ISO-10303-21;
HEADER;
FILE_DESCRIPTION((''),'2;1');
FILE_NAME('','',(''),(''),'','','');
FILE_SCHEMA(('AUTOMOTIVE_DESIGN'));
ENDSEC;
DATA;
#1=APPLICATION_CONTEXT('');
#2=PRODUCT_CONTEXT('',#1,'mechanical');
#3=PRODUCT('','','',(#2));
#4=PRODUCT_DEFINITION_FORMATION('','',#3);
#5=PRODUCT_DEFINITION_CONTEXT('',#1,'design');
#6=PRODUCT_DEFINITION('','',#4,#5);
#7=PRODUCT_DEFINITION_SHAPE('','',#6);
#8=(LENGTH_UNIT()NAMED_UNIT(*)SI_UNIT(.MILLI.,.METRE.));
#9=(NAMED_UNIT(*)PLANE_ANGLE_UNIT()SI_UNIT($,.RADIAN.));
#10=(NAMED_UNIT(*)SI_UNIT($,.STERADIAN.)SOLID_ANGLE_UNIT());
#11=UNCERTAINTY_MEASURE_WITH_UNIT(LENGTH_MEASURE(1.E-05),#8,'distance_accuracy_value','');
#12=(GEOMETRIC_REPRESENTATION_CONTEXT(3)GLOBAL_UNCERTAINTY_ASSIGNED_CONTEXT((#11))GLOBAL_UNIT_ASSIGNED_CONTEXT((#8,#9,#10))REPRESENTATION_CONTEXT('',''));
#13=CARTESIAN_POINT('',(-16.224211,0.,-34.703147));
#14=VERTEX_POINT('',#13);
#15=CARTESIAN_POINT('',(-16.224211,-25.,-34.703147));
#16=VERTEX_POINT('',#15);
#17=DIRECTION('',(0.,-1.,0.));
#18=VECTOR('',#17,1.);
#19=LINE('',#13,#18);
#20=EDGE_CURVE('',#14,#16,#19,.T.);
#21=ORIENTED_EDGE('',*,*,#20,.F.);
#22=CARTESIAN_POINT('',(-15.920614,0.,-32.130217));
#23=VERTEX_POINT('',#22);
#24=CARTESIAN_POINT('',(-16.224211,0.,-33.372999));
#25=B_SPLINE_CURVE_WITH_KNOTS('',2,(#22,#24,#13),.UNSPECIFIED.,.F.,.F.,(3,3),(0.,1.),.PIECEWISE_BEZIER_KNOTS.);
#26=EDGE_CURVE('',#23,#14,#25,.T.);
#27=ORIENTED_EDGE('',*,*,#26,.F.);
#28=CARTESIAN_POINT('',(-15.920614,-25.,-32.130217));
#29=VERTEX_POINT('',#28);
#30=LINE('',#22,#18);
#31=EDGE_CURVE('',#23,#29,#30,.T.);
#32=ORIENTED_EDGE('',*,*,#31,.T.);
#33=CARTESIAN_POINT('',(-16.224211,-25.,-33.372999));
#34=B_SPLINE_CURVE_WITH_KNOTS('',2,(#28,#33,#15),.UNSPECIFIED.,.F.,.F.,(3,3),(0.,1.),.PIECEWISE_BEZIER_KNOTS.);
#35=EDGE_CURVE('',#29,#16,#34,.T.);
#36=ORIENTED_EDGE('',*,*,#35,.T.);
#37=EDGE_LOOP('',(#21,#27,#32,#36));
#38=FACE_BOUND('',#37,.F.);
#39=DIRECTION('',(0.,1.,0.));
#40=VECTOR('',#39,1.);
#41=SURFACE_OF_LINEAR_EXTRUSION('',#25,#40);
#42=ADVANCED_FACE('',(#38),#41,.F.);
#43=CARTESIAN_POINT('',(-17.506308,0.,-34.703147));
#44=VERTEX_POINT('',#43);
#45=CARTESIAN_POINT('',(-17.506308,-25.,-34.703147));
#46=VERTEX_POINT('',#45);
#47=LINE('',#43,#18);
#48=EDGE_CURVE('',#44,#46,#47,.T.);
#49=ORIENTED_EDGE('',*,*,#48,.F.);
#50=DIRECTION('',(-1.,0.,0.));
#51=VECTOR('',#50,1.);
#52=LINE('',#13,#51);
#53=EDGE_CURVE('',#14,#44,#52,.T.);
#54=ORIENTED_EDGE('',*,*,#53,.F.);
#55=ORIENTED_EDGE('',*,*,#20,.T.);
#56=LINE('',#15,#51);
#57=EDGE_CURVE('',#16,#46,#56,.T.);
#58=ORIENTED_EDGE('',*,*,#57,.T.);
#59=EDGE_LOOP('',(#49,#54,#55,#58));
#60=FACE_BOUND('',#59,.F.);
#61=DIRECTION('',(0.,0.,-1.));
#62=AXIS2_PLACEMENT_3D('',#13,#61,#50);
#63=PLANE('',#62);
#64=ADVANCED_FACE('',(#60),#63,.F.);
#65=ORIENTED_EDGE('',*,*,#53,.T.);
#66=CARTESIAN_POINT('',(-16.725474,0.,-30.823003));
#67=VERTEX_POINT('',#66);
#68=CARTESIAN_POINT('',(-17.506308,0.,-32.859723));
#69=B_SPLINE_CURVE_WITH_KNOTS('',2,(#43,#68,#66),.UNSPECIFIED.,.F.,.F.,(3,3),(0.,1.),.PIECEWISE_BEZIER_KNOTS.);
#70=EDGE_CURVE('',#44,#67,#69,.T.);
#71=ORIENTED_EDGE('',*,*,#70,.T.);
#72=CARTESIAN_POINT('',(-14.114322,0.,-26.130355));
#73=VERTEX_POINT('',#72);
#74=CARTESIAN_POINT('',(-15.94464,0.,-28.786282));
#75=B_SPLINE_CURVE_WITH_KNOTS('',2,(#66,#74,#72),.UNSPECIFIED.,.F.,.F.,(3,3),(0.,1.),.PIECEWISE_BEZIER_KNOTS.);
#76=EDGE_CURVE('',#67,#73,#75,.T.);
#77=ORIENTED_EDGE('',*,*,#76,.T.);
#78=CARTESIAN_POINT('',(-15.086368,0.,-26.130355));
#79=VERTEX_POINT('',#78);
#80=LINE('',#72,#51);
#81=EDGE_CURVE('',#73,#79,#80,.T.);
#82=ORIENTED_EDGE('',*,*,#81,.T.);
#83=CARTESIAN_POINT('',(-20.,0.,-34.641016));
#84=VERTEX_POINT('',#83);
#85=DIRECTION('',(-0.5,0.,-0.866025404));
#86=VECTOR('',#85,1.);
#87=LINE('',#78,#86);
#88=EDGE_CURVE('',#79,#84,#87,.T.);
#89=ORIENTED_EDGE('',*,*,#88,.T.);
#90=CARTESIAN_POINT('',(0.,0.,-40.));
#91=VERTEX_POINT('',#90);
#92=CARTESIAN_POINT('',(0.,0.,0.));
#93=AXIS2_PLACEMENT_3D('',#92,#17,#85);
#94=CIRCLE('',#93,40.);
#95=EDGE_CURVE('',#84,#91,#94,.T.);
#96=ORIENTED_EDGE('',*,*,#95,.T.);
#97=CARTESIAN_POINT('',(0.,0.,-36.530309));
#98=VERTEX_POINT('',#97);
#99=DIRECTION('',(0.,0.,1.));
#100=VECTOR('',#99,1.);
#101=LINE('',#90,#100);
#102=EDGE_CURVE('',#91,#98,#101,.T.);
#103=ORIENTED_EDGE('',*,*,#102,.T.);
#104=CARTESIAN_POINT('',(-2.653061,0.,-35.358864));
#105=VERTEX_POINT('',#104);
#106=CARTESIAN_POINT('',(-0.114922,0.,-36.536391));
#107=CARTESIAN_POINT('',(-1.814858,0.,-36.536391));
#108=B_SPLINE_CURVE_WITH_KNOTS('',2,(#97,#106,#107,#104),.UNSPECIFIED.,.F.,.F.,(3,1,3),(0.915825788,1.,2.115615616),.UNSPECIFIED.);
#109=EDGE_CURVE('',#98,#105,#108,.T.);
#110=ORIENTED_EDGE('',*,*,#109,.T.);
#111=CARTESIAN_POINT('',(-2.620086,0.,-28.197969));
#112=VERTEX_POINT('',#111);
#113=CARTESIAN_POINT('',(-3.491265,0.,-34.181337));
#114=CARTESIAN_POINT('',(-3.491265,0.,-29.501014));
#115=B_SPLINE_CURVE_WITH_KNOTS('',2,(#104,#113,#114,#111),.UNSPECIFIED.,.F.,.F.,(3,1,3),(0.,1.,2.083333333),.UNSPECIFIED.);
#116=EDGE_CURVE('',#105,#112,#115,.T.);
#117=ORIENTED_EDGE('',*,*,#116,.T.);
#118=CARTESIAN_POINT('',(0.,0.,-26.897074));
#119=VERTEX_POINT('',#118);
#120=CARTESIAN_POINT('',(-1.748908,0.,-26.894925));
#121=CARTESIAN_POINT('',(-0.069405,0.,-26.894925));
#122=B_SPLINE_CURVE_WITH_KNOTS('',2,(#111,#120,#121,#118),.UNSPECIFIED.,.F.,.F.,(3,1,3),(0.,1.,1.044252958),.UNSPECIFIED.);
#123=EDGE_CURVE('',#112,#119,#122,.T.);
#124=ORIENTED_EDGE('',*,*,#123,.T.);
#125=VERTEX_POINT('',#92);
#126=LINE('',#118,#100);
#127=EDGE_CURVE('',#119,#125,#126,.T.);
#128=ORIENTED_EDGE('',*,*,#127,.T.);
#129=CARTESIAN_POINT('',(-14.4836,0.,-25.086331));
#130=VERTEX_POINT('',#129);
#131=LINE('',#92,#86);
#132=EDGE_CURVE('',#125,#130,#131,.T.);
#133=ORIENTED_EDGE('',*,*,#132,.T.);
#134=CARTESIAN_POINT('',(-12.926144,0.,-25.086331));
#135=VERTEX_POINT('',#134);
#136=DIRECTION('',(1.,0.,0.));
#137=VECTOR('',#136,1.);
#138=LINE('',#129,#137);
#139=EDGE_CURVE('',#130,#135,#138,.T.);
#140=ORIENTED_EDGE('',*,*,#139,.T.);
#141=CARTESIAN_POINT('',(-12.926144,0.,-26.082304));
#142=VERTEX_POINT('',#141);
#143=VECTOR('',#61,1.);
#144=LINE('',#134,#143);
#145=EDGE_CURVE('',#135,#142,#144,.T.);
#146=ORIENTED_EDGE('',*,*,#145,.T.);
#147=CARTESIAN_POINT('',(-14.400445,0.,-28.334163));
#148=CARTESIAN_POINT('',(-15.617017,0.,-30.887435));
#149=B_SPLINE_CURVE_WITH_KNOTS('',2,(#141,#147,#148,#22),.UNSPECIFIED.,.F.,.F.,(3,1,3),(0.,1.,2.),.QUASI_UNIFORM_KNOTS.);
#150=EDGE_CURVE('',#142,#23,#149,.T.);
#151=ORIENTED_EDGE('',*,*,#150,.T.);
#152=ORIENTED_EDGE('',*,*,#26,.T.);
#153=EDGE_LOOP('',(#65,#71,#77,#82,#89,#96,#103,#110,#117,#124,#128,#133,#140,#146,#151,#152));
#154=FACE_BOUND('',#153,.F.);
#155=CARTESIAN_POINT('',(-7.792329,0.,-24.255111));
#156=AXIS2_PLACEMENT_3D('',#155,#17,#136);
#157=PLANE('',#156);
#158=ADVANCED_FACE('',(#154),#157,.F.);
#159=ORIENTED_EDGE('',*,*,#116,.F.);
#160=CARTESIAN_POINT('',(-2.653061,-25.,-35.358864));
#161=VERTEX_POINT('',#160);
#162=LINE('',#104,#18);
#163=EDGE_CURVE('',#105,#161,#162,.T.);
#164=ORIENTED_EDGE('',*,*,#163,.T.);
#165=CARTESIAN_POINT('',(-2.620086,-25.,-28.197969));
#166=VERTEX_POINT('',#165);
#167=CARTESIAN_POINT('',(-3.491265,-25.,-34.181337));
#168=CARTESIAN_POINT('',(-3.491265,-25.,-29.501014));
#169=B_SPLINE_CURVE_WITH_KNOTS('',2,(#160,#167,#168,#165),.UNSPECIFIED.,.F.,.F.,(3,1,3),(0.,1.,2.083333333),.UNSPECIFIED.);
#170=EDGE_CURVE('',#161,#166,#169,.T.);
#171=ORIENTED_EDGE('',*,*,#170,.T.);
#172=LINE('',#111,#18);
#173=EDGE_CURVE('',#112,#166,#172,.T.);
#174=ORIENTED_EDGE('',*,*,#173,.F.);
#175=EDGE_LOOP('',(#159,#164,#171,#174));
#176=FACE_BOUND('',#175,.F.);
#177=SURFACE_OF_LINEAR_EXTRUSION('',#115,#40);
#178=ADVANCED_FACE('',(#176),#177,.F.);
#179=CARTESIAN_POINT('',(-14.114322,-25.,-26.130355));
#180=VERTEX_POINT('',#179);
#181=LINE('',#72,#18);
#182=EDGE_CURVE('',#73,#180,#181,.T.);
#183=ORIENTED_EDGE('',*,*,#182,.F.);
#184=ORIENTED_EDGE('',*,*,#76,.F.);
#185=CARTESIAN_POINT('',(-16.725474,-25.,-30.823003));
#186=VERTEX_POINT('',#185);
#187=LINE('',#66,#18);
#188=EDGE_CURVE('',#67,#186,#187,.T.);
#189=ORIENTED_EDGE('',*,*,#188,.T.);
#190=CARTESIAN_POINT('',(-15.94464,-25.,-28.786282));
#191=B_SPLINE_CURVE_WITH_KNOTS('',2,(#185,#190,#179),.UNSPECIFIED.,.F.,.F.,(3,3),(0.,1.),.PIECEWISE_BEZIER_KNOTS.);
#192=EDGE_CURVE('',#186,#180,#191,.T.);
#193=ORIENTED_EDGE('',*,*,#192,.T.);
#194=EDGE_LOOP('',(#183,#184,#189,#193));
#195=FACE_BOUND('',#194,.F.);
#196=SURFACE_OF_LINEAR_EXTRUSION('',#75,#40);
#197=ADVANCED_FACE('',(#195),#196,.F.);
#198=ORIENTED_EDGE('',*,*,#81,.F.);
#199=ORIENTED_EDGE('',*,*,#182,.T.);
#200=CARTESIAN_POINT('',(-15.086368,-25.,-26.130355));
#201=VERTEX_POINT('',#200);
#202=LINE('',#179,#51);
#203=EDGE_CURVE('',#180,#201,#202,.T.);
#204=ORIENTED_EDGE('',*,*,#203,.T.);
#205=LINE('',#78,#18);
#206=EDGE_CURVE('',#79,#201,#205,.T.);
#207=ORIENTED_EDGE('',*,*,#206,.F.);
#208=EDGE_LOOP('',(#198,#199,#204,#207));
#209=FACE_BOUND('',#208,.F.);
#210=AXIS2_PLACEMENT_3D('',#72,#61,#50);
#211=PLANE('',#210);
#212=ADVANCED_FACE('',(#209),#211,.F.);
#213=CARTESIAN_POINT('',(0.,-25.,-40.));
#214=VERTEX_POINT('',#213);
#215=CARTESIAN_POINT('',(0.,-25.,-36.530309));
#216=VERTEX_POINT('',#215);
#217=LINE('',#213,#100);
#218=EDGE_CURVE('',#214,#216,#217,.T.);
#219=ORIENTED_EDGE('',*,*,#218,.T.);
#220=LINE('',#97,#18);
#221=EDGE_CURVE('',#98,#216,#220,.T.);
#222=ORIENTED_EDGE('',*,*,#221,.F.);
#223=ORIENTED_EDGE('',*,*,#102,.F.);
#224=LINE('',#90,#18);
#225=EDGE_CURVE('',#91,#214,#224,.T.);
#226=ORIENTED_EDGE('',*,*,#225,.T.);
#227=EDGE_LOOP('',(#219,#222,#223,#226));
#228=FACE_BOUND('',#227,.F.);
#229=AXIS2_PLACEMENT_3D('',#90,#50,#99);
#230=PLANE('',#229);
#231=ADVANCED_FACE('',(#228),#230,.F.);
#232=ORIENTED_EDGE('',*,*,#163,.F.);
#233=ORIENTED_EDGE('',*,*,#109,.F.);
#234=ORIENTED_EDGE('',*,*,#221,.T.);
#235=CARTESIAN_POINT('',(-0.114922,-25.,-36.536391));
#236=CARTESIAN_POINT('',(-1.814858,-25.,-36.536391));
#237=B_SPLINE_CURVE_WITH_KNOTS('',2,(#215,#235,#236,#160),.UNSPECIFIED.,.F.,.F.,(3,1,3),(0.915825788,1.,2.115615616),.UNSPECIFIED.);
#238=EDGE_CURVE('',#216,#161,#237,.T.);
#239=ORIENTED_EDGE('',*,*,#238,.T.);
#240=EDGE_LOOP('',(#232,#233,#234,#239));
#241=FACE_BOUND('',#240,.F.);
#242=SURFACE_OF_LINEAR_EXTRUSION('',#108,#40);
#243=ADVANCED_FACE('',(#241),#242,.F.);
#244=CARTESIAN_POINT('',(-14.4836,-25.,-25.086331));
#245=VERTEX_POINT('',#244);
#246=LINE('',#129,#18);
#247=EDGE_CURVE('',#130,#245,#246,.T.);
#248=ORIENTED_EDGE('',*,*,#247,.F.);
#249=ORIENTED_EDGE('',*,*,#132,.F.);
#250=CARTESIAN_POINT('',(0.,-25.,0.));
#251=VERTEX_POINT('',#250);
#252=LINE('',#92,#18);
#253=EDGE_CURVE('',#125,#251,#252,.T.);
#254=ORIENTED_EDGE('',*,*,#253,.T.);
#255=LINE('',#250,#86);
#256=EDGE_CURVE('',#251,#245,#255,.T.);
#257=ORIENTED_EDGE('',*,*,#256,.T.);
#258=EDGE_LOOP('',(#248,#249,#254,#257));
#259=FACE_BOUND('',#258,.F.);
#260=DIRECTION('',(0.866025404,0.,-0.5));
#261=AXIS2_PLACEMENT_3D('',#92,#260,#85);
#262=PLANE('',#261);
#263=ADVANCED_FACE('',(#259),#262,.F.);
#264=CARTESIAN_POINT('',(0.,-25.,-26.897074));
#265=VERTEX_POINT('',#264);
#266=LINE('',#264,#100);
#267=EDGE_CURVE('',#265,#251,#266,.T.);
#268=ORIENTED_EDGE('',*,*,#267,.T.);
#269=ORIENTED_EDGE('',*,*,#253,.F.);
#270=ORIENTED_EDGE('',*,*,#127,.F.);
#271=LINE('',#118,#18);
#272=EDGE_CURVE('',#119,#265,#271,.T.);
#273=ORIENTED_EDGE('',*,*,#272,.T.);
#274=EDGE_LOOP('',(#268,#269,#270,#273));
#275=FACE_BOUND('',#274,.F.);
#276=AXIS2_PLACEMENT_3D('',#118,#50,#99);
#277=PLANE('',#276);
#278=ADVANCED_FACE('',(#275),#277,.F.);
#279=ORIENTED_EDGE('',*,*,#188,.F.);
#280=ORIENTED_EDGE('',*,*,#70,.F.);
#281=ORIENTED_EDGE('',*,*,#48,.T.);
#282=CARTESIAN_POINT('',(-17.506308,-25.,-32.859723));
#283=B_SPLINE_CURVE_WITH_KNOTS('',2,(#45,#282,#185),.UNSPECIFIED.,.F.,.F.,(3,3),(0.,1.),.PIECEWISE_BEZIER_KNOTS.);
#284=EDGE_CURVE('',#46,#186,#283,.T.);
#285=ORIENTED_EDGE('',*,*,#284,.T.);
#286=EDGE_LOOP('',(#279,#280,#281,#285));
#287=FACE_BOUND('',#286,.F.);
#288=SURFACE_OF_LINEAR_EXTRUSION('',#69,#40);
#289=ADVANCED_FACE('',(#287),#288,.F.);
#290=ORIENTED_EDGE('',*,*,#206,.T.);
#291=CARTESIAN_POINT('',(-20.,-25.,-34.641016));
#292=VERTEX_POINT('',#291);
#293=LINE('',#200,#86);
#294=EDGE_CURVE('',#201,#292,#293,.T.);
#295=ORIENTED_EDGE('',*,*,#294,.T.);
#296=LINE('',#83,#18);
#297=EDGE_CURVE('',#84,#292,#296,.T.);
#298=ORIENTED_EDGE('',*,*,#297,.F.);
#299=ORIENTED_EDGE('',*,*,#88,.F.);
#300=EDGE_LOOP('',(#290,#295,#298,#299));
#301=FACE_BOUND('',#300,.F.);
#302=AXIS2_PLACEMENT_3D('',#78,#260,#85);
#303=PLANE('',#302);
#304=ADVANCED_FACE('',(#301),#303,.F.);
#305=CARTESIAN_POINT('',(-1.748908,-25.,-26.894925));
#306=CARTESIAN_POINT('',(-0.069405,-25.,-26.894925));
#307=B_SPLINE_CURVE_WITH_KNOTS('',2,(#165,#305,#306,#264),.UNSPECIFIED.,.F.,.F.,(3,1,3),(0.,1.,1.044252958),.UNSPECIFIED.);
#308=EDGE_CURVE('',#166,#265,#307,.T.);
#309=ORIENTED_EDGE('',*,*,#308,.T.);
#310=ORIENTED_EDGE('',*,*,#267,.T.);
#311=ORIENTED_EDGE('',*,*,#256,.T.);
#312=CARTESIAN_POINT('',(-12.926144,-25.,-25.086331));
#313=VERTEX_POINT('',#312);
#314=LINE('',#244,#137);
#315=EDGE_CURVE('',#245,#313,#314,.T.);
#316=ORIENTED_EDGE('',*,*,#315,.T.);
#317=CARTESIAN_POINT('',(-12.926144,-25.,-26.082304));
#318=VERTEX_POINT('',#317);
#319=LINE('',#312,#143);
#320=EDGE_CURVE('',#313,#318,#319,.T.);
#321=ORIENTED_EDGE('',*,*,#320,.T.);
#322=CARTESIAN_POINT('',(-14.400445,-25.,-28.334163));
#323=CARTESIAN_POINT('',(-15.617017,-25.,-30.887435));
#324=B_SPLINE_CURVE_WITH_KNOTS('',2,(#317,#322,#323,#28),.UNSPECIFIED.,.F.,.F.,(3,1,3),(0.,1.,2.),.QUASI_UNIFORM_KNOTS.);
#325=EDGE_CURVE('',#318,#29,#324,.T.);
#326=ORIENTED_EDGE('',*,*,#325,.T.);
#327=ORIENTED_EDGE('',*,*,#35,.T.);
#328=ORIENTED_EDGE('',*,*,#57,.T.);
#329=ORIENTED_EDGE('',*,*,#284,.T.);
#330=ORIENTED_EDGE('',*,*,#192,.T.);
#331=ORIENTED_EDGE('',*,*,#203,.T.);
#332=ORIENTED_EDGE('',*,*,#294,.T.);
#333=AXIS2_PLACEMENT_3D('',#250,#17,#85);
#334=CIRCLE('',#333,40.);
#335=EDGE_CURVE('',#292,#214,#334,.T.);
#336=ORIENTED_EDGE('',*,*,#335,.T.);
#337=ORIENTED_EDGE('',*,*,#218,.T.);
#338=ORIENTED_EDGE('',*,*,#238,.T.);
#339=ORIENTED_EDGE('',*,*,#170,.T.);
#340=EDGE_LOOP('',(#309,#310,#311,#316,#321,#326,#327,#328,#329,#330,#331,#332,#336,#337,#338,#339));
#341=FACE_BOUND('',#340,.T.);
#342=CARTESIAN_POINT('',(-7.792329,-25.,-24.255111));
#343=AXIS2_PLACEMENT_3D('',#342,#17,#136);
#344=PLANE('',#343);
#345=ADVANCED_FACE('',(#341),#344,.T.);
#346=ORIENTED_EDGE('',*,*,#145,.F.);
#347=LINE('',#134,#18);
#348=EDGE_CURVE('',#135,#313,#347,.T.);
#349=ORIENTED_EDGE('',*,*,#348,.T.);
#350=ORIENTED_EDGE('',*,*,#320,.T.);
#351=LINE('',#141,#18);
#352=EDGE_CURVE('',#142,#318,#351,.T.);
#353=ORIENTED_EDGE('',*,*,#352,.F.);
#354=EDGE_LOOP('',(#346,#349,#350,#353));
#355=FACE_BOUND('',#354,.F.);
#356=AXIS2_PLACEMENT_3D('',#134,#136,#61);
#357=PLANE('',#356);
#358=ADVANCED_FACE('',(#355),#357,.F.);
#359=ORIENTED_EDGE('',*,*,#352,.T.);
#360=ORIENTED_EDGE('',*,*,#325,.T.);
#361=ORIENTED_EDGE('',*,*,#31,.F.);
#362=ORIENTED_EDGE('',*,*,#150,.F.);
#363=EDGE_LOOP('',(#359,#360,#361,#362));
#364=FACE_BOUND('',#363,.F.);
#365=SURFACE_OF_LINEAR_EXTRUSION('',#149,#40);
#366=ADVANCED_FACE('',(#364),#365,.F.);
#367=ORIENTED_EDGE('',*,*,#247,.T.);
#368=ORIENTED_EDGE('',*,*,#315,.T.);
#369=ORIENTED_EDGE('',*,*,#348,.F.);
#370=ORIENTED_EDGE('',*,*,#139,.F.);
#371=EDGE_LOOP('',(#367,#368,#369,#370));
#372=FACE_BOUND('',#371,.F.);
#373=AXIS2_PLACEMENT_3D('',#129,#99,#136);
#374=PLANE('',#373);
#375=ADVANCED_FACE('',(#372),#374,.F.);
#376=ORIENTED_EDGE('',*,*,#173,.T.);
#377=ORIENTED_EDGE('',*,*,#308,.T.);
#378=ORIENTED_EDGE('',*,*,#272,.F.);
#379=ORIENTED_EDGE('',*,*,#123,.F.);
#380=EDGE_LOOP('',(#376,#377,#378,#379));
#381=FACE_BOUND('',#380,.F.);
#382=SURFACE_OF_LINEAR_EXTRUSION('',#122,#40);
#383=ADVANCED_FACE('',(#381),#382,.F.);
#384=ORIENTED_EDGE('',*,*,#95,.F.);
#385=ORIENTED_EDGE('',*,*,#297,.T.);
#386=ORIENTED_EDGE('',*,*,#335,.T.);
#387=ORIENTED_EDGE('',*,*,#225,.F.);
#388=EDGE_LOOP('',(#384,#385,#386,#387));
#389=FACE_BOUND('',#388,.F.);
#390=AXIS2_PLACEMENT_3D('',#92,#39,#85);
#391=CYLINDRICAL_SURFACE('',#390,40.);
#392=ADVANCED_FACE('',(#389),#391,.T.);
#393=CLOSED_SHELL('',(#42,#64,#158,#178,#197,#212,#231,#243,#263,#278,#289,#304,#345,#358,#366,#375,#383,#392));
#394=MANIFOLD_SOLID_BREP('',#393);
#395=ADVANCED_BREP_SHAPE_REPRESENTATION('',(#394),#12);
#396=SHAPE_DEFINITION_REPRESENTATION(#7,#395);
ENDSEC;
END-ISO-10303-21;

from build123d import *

# Parameters (mm, degrees)
F1_DEPTH = 25


# Not quite as in the source:
# - the program builds the solid bodies; features that only make, move or delete a surface that nothing else refers to are left out


with BuildPart() as f1:
    # F0 (on Front) → F1 (new body)
    with BuildSketch(Plane.XZ):
        with BuildLine():
            ThreePointArc((-20, -34.6410161514), (-10.3527618041, -38.6370330516), (0, -40))
            Line((0, -40), (0, -36.5303086516))
            add(Edge.make_bspline(
                [(0, -36.5303086516), (-0.1149220611, -36.5363907695), (-0.234185262, -36.5363907695)],
                knots=[0.9158257876, 0.9158257876, 0.9158257876, 1, 1, 1], degree=2))
            add(Edge.make_bspline(
                [(-0.234185262, -36.5363907695), (-1.8148580784, -36.5363907695), (-2.6530614293, -35.3588639809)],
                knots=[0, 0, 0, 1, 1, 1], degree=2))
            add(Edge.make_bspline(
                [(-2.6530614293, -35.3588639809), (-3.4912647801, -34.1813371924), (-3.4912647801, -31.9347820187)],
                knots=[0, 0, 0, 1, 1, 1], degree=2))
            add(Edge.make_bspline(
                [(-3.4912647801, -31.9347820187), (-3.4912647801, -29.5010139137), (-2.6200864243, -28.1979693646)],
                knots=[0, 0, 0, 1, 1, 1], degree=2))
            add(Edge.make_bspline(
                [(-2.6200864243, -28.1979693646), (-1.7489080686, -26.8949248154), (-0.1405787965, -26.8949248154)],
                knots=[0, 0, 0, 1, 1, 1], degree=2))
            add(Edge.make_bspline(
                [(-0.1405787965, -26.8949248154), (-0.0694054692, -26.8949248154), (0, -26.8970735535)],
                knots=[0, 0, 0, 0.0335559038, 0.0335559038, 0.0335559038], degree=2))
            Line((0, -26.8970735535), (0, 0))
            Line((0, 0), (-14.4835999879, -25.0863310555))
            Line((-14.4835999879, -25.0863310555), (-12.9261437307, -25.0863310555))
            Line((-12.9261437307, -25.0863310555), (-12.9261437307, -26.0823037829))
            add(Edge.make_bspline(
                [(-12.9261437307, -26.0823037829), (-14.4004454653, -28.334163173), (-15.0087314402, -29.6107992676)],
                knots=[0, 0, 0, 1, 1, 1], degree=2))
            add(Edge.make_bspline(
                [(-15.0087314402, -29.6107992676), (-15.6170174151, -30.8874353622), (-15.9206143649, -32.1302171206)],
                knots=[0, 0, 0, 1, 1, 1], degree=2))
            add(Edge.make_bspline(
                [(-15.9206143649, -32.1302171206), (-16.2242113147, -33.3729988791), (-16.2242113147, -34.7031466663)],
                knots=[0, 0, 0, 1, 1, 1], degree=2))
            Line((-16.2242113147, -34.7031466663), (-17.5063077861, -34.7031466663))
            add(Edge.make_bspline(
                [(-17.5063077861, -34.7031466663), (-17.5063077861, -32.8597234604), (-16.7254739044, -30.823002916)],
                knots=[0, 0, 0, 1, 1, 1], degree=2))
            add(Edge.make_bspline(
                [(-16.7254739044, -30.823002916), (-15.9446400228, -28.7862823716), (-14.1143217212, -26.1303550987)],
                knots=[0, 0, 0, 1, 1, 1], degree=2))
            Line((-14.1143217212, -26.1303550987), (-15.0863675502, -26.1303550987))
            Line((-15.0863675502, -26.1303550987), (-20, -34.6410161514))
        make_face()
    extrude(amount=F1_DEPTH)


solid = f1.part
